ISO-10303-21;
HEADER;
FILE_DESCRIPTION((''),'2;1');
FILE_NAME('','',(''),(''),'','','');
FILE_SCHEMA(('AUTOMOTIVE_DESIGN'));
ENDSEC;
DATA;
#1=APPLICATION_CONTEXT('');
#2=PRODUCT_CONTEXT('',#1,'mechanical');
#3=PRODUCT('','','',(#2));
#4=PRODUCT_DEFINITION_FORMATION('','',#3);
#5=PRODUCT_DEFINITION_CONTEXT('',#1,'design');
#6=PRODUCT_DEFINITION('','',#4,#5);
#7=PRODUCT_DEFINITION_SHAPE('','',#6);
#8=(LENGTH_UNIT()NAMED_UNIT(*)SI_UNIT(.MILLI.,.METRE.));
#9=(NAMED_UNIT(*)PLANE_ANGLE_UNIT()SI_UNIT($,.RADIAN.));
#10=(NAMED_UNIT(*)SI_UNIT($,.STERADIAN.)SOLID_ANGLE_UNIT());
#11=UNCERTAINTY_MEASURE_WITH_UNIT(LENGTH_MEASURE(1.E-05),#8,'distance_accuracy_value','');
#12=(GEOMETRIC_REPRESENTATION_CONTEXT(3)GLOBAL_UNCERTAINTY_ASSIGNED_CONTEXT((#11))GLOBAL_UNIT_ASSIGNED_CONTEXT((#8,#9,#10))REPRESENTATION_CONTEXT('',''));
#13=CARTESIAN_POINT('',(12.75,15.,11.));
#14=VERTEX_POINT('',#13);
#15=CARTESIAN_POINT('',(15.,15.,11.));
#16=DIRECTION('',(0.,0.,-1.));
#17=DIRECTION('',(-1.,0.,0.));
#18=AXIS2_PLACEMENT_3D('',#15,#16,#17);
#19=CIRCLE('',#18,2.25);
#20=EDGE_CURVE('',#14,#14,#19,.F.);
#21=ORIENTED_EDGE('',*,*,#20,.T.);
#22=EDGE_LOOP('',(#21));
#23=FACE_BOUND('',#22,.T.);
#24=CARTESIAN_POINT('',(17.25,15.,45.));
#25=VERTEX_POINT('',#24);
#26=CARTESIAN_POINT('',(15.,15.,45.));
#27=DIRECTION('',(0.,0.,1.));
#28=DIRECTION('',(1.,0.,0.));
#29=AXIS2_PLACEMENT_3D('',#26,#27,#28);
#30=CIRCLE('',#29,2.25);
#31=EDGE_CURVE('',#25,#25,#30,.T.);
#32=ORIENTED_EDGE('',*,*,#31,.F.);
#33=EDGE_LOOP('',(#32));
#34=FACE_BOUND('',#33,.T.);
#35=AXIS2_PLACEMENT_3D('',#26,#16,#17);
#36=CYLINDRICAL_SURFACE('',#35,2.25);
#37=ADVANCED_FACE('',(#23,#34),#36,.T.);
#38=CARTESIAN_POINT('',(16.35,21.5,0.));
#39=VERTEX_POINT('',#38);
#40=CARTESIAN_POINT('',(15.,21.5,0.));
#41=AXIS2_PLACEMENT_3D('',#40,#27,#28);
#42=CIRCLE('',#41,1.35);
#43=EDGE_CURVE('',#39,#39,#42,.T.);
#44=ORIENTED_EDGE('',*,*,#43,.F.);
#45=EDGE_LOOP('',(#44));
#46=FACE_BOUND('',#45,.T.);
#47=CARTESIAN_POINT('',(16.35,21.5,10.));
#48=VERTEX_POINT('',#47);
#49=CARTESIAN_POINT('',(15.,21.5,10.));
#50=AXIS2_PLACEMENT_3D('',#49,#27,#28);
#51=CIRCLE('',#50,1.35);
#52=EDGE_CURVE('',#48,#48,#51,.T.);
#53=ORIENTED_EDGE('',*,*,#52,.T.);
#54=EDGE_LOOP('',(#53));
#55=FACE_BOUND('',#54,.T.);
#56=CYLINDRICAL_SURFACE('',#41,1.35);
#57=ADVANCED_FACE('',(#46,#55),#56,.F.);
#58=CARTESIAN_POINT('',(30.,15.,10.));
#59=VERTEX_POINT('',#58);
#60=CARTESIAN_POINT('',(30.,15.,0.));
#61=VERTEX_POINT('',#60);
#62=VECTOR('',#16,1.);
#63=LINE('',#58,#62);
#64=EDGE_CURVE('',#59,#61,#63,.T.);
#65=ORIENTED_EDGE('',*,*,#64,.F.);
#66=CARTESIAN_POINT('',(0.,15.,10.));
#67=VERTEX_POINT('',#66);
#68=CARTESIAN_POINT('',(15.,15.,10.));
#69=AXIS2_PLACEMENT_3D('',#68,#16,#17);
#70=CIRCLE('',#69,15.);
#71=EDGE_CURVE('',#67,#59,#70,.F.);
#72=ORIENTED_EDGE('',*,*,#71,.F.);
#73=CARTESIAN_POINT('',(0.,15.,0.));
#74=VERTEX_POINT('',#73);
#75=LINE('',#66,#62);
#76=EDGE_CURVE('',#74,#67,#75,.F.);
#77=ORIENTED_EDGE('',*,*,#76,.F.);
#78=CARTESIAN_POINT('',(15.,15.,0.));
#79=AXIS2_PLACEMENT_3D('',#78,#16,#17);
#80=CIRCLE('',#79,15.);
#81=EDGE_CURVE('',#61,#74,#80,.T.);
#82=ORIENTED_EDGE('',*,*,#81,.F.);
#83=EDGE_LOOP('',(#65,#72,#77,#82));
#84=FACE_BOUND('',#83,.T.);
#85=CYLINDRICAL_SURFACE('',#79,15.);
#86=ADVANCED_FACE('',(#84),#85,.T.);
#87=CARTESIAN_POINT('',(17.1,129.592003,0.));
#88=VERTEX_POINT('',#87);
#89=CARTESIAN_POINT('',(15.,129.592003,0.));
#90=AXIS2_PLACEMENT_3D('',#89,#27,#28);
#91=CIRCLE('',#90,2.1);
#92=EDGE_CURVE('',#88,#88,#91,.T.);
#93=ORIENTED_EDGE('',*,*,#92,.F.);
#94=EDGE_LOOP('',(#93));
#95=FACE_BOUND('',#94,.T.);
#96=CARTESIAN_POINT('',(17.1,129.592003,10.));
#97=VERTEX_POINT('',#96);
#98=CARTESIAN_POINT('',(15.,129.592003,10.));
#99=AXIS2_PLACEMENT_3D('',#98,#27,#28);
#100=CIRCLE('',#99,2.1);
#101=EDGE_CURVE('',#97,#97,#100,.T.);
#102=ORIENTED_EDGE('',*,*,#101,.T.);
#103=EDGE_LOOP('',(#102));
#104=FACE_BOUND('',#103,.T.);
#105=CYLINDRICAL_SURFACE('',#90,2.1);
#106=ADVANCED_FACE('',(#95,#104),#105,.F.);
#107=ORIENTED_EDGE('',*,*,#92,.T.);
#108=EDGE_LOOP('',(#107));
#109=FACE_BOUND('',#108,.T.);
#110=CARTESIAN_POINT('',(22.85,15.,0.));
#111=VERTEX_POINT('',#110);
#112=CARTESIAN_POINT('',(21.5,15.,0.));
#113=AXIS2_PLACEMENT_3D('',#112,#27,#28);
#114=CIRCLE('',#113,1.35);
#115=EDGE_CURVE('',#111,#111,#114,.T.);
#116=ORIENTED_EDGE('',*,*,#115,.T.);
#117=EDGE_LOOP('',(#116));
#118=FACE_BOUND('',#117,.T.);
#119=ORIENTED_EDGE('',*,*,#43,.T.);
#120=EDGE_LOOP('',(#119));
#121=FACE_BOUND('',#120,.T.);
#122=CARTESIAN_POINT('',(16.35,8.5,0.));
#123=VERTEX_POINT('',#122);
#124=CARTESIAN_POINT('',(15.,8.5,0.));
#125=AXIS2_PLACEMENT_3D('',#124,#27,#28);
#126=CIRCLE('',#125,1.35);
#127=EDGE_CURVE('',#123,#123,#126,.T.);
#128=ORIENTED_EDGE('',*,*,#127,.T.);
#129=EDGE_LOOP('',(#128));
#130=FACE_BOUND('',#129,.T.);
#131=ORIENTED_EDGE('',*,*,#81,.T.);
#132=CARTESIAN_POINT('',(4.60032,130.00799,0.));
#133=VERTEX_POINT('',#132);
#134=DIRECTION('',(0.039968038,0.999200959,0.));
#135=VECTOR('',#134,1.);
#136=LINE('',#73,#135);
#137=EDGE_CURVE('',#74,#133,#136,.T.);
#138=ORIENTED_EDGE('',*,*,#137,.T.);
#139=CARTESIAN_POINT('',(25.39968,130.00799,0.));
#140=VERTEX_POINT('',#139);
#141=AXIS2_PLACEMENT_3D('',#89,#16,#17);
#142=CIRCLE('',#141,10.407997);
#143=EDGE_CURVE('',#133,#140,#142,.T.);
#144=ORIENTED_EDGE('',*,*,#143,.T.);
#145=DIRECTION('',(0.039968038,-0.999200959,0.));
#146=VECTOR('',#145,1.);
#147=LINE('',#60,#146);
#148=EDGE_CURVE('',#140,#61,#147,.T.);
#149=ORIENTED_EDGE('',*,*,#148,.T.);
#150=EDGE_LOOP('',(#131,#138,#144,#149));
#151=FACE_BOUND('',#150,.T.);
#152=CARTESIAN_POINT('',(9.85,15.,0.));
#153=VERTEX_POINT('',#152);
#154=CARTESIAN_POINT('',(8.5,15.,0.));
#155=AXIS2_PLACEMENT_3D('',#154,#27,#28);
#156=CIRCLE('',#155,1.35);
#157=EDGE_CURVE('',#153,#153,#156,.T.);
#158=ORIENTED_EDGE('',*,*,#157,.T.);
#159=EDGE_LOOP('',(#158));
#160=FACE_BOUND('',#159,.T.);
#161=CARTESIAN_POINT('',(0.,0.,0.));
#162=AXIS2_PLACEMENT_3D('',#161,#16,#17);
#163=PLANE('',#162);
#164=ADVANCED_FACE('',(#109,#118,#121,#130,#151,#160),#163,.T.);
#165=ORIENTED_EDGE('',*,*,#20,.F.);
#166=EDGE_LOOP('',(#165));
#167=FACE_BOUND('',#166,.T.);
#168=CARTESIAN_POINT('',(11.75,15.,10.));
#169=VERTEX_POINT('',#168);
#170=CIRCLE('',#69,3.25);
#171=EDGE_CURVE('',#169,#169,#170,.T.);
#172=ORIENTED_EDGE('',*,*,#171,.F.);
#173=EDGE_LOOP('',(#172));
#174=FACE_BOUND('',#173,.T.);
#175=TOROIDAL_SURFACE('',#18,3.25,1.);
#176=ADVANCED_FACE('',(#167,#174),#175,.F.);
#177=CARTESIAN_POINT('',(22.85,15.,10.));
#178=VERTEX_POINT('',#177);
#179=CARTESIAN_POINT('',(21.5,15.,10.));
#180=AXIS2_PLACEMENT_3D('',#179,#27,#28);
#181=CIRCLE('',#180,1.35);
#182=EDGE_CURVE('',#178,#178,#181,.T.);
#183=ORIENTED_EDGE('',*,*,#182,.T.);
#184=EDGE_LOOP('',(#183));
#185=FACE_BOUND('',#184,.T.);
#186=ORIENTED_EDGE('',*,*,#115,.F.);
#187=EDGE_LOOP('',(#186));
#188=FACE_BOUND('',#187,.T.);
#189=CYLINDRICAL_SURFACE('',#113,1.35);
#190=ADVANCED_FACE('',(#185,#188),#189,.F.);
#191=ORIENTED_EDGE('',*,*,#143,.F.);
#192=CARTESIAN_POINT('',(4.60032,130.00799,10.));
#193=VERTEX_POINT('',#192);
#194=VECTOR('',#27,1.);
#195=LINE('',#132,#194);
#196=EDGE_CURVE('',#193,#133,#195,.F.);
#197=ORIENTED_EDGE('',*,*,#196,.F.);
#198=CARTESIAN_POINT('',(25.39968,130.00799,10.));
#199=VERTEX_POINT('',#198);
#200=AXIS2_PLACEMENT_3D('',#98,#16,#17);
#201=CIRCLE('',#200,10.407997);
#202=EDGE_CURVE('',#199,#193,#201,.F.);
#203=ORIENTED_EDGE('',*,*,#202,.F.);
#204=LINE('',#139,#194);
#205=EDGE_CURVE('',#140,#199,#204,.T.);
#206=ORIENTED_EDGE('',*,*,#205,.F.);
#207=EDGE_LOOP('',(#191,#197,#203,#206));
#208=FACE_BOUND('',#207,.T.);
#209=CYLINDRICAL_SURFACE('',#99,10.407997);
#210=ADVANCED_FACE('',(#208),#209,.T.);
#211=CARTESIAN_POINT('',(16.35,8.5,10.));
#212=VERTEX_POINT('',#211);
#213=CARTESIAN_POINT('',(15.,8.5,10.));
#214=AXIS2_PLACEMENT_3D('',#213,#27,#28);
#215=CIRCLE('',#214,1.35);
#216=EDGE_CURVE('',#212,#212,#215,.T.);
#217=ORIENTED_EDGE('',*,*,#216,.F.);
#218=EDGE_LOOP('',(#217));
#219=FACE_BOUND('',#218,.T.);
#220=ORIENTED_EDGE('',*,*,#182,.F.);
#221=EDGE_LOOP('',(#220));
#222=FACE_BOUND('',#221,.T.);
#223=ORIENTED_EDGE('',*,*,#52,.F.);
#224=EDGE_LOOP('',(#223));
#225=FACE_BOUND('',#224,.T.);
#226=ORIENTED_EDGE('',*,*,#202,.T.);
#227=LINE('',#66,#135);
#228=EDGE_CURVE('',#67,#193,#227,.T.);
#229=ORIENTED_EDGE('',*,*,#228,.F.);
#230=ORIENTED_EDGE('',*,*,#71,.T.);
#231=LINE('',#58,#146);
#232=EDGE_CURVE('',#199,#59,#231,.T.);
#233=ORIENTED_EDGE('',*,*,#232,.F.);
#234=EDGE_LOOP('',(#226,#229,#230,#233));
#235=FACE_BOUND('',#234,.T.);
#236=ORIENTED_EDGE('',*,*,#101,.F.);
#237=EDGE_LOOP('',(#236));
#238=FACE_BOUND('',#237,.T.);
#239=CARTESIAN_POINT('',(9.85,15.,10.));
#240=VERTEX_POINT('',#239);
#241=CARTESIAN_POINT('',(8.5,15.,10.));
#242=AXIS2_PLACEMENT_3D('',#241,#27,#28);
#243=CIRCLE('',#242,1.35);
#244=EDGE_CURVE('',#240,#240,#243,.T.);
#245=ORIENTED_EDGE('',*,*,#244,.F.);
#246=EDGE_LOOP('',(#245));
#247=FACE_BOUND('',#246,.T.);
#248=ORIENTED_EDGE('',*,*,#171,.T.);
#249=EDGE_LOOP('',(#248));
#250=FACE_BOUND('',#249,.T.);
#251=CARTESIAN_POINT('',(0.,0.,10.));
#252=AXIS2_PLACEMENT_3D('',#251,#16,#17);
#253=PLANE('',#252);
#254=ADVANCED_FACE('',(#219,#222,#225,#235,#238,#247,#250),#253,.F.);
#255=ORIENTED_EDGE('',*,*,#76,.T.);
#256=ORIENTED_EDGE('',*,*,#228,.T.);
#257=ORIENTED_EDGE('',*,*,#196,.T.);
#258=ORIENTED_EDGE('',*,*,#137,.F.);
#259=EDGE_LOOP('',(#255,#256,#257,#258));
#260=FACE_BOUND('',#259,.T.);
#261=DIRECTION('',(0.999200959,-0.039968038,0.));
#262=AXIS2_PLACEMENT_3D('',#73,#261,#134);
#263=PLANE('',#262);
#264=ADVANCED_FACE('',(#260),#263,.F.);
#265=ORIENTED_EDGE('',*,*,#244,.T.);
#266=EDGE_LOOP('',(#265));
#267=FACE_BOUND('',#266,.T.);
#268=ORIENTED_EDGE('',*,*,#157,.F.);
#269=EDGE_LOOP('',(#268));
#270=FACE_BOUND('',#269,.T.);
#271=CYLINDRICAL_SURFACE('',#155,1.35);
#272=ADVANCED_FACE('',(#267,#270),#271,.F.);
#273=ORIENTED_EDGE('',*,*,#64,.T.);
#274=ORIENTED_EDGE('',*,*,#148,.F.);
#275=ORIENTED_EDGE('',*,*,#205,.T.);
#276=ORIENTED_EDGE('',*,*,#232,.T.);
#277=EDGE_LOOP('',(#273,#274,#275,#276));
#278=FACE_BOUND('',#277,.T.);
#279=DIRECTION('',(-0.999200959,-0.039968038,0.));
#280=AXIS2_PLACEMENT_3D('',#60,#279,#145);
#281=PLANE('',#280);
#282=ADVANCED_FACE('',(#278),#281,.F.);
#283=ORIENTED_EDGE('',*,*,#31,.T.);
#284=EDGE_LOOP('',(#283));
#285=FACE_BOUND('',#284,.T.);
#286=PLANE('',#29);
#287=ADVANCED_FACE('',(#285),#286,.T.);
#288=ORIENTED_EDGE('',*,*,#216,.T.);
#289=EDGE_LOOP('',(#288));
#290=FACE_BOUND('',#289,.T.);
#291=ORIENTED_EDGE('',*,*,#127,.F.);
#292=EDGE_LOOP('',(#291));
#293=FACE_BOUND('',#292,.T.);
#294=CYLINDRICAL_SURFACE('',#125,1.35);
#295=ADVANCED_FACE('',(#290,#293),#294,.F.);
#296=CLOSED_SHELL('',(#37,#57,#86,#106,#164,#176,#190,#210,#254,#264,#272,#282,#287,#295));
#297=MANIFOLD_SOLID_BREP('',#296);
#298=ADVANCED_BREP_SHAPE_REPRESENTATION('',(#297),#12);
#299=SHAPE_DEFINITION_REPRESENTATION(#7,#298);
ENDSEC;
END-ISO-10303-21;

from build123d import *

# Parameters (mm, degrees)
SKETCH_1_W          = 30
SKETCH_1_H          = 140
EXTRUDE_1_DEPTH     = 10
FILLET_1_RADIUS     = 15
FILLET_1_LENGTH     = 10
CUT_EXTRUDE_1_DEPTH = 10
FILLET_2_R          = 10.407997
SKETCH_3_R          = 2.1
CUT_EXTRUDE_2_DEPTH = 144.527000944
SKETCH_4_R          = 1.35
CUT_EXTRUDE_3_DEPTH = 144.527000944
SKETCH_5_R          = 2.25
EXTRUDE_2_DEPTH     = 35
FILLET_3_R          = 1


with BuildPart() as part:
    # 草图1 → 凸台-拉伸1 (new body)
    with BuildSketch(Plane.XY):
        with Locations((15, 70)):
            Rectangle(SKETCH_1_W, SKETCH_1_H)
    extrude(amount=EXTRUDE_1_DEPTH)

    # 圆角1: full round fillet: the end face becomes a half cylinder, R = half its width
    fillet_1_face = Plane((15, 0, 5), x_dir=(0, 0, 1), z_dir=(0, -1, 0))  # on the end face: x along it, z out of the body
    fillet_1_slab = fillet_1_face.offset(-FILLET_1_RADIUS / 2) * Box(FILLET_1_LENGTH, 2 * FILLET_1_RADIUS, FILLET_1_RADIUS, mode=Mode.PRIVATE)  # the body's end, R deep
    fillet_1_round = Plane((15, 15, 5), x_dir=(0, -1, 0), z_dir=(0, 0, 1)) * Cylinder(FILLET_1_RADIUS, FILLET_1_LENGTH, mode=Mode.PRIVATE)  # its axis R under the face
    add(fillet_1_slab - fillet_1_round, mode=Mode.SUBTRACT)

    # 草图2 → 切除-拉伸1 (cut)
    with BuildSketch(Plane.XY.offset(10)):
        Polygon((0, 15), (5, 140), (0, 140), align=None)
        Polygon((30, 15), (25, 140), (30, 140), align=None)
    extrude(amount=-CUT_EXTRUDE_1_DEPTH, mode=Mode.SUBTRACT)

    # 圆角2
    fillet_2_edges = [part.edges().sort_by_distance(p)[0] for p in [
        (5, 140, 5),
        (25, 140, 5),
    ]]
    fillet(fillet_2_edges, radius=FILLET_2_R - 0.0001)  # a hair under: the kernel refuses the full size

    # 草图3 → 切除-拉伸2 (cut, through all)
    with BuildSketch(Plane.XY.offset(10)):
        with Locations((15, 129.592003197)):
            Circle(SKETCH_3_R)
    extrude(amount=-CUT_EXTRUDE_2_DEPTH, mode=Mode.SUBTRACT)

    # 草图4 → 切除-拉伸3 (cut, through all)
    with BuildSketch(Plane.XY.offset(10)):
        with Locations((15, 8.5)):
            Circle(SKETCH_4_R)
        with Locations((21.5, 15)):
            Circle(SKETCH_4_R)
        with Locations((15, 21.5)):
            Circle(SKETCH_4_R)
        with Locations((8.5, 15)):
            Circle(SKETCH_4_R)
    extrude(amount=-CUT_EXTRUDE_3_DEPTH, mode=Mode.SUBTRACT)

    # 草图5 → 凸台-拉伸2 (add)
    with BuildSketch(Plane.XY.offset(10)):
        with Locations(Location((15, 15, 0), (0, 0, 180))):
            Circle(SKETCH_5_R)
    extrude(amount=EXTRUDE_2_DEPTH)

    # 圆角3
    fillet_3_edges = [part.edges().sort_by_distance(p)[0] for p in [
        (17.25, 15, 10),
    ]]
    fillet(fillet_3_edges, radius=FILLET_3_R)


solid = part.part
